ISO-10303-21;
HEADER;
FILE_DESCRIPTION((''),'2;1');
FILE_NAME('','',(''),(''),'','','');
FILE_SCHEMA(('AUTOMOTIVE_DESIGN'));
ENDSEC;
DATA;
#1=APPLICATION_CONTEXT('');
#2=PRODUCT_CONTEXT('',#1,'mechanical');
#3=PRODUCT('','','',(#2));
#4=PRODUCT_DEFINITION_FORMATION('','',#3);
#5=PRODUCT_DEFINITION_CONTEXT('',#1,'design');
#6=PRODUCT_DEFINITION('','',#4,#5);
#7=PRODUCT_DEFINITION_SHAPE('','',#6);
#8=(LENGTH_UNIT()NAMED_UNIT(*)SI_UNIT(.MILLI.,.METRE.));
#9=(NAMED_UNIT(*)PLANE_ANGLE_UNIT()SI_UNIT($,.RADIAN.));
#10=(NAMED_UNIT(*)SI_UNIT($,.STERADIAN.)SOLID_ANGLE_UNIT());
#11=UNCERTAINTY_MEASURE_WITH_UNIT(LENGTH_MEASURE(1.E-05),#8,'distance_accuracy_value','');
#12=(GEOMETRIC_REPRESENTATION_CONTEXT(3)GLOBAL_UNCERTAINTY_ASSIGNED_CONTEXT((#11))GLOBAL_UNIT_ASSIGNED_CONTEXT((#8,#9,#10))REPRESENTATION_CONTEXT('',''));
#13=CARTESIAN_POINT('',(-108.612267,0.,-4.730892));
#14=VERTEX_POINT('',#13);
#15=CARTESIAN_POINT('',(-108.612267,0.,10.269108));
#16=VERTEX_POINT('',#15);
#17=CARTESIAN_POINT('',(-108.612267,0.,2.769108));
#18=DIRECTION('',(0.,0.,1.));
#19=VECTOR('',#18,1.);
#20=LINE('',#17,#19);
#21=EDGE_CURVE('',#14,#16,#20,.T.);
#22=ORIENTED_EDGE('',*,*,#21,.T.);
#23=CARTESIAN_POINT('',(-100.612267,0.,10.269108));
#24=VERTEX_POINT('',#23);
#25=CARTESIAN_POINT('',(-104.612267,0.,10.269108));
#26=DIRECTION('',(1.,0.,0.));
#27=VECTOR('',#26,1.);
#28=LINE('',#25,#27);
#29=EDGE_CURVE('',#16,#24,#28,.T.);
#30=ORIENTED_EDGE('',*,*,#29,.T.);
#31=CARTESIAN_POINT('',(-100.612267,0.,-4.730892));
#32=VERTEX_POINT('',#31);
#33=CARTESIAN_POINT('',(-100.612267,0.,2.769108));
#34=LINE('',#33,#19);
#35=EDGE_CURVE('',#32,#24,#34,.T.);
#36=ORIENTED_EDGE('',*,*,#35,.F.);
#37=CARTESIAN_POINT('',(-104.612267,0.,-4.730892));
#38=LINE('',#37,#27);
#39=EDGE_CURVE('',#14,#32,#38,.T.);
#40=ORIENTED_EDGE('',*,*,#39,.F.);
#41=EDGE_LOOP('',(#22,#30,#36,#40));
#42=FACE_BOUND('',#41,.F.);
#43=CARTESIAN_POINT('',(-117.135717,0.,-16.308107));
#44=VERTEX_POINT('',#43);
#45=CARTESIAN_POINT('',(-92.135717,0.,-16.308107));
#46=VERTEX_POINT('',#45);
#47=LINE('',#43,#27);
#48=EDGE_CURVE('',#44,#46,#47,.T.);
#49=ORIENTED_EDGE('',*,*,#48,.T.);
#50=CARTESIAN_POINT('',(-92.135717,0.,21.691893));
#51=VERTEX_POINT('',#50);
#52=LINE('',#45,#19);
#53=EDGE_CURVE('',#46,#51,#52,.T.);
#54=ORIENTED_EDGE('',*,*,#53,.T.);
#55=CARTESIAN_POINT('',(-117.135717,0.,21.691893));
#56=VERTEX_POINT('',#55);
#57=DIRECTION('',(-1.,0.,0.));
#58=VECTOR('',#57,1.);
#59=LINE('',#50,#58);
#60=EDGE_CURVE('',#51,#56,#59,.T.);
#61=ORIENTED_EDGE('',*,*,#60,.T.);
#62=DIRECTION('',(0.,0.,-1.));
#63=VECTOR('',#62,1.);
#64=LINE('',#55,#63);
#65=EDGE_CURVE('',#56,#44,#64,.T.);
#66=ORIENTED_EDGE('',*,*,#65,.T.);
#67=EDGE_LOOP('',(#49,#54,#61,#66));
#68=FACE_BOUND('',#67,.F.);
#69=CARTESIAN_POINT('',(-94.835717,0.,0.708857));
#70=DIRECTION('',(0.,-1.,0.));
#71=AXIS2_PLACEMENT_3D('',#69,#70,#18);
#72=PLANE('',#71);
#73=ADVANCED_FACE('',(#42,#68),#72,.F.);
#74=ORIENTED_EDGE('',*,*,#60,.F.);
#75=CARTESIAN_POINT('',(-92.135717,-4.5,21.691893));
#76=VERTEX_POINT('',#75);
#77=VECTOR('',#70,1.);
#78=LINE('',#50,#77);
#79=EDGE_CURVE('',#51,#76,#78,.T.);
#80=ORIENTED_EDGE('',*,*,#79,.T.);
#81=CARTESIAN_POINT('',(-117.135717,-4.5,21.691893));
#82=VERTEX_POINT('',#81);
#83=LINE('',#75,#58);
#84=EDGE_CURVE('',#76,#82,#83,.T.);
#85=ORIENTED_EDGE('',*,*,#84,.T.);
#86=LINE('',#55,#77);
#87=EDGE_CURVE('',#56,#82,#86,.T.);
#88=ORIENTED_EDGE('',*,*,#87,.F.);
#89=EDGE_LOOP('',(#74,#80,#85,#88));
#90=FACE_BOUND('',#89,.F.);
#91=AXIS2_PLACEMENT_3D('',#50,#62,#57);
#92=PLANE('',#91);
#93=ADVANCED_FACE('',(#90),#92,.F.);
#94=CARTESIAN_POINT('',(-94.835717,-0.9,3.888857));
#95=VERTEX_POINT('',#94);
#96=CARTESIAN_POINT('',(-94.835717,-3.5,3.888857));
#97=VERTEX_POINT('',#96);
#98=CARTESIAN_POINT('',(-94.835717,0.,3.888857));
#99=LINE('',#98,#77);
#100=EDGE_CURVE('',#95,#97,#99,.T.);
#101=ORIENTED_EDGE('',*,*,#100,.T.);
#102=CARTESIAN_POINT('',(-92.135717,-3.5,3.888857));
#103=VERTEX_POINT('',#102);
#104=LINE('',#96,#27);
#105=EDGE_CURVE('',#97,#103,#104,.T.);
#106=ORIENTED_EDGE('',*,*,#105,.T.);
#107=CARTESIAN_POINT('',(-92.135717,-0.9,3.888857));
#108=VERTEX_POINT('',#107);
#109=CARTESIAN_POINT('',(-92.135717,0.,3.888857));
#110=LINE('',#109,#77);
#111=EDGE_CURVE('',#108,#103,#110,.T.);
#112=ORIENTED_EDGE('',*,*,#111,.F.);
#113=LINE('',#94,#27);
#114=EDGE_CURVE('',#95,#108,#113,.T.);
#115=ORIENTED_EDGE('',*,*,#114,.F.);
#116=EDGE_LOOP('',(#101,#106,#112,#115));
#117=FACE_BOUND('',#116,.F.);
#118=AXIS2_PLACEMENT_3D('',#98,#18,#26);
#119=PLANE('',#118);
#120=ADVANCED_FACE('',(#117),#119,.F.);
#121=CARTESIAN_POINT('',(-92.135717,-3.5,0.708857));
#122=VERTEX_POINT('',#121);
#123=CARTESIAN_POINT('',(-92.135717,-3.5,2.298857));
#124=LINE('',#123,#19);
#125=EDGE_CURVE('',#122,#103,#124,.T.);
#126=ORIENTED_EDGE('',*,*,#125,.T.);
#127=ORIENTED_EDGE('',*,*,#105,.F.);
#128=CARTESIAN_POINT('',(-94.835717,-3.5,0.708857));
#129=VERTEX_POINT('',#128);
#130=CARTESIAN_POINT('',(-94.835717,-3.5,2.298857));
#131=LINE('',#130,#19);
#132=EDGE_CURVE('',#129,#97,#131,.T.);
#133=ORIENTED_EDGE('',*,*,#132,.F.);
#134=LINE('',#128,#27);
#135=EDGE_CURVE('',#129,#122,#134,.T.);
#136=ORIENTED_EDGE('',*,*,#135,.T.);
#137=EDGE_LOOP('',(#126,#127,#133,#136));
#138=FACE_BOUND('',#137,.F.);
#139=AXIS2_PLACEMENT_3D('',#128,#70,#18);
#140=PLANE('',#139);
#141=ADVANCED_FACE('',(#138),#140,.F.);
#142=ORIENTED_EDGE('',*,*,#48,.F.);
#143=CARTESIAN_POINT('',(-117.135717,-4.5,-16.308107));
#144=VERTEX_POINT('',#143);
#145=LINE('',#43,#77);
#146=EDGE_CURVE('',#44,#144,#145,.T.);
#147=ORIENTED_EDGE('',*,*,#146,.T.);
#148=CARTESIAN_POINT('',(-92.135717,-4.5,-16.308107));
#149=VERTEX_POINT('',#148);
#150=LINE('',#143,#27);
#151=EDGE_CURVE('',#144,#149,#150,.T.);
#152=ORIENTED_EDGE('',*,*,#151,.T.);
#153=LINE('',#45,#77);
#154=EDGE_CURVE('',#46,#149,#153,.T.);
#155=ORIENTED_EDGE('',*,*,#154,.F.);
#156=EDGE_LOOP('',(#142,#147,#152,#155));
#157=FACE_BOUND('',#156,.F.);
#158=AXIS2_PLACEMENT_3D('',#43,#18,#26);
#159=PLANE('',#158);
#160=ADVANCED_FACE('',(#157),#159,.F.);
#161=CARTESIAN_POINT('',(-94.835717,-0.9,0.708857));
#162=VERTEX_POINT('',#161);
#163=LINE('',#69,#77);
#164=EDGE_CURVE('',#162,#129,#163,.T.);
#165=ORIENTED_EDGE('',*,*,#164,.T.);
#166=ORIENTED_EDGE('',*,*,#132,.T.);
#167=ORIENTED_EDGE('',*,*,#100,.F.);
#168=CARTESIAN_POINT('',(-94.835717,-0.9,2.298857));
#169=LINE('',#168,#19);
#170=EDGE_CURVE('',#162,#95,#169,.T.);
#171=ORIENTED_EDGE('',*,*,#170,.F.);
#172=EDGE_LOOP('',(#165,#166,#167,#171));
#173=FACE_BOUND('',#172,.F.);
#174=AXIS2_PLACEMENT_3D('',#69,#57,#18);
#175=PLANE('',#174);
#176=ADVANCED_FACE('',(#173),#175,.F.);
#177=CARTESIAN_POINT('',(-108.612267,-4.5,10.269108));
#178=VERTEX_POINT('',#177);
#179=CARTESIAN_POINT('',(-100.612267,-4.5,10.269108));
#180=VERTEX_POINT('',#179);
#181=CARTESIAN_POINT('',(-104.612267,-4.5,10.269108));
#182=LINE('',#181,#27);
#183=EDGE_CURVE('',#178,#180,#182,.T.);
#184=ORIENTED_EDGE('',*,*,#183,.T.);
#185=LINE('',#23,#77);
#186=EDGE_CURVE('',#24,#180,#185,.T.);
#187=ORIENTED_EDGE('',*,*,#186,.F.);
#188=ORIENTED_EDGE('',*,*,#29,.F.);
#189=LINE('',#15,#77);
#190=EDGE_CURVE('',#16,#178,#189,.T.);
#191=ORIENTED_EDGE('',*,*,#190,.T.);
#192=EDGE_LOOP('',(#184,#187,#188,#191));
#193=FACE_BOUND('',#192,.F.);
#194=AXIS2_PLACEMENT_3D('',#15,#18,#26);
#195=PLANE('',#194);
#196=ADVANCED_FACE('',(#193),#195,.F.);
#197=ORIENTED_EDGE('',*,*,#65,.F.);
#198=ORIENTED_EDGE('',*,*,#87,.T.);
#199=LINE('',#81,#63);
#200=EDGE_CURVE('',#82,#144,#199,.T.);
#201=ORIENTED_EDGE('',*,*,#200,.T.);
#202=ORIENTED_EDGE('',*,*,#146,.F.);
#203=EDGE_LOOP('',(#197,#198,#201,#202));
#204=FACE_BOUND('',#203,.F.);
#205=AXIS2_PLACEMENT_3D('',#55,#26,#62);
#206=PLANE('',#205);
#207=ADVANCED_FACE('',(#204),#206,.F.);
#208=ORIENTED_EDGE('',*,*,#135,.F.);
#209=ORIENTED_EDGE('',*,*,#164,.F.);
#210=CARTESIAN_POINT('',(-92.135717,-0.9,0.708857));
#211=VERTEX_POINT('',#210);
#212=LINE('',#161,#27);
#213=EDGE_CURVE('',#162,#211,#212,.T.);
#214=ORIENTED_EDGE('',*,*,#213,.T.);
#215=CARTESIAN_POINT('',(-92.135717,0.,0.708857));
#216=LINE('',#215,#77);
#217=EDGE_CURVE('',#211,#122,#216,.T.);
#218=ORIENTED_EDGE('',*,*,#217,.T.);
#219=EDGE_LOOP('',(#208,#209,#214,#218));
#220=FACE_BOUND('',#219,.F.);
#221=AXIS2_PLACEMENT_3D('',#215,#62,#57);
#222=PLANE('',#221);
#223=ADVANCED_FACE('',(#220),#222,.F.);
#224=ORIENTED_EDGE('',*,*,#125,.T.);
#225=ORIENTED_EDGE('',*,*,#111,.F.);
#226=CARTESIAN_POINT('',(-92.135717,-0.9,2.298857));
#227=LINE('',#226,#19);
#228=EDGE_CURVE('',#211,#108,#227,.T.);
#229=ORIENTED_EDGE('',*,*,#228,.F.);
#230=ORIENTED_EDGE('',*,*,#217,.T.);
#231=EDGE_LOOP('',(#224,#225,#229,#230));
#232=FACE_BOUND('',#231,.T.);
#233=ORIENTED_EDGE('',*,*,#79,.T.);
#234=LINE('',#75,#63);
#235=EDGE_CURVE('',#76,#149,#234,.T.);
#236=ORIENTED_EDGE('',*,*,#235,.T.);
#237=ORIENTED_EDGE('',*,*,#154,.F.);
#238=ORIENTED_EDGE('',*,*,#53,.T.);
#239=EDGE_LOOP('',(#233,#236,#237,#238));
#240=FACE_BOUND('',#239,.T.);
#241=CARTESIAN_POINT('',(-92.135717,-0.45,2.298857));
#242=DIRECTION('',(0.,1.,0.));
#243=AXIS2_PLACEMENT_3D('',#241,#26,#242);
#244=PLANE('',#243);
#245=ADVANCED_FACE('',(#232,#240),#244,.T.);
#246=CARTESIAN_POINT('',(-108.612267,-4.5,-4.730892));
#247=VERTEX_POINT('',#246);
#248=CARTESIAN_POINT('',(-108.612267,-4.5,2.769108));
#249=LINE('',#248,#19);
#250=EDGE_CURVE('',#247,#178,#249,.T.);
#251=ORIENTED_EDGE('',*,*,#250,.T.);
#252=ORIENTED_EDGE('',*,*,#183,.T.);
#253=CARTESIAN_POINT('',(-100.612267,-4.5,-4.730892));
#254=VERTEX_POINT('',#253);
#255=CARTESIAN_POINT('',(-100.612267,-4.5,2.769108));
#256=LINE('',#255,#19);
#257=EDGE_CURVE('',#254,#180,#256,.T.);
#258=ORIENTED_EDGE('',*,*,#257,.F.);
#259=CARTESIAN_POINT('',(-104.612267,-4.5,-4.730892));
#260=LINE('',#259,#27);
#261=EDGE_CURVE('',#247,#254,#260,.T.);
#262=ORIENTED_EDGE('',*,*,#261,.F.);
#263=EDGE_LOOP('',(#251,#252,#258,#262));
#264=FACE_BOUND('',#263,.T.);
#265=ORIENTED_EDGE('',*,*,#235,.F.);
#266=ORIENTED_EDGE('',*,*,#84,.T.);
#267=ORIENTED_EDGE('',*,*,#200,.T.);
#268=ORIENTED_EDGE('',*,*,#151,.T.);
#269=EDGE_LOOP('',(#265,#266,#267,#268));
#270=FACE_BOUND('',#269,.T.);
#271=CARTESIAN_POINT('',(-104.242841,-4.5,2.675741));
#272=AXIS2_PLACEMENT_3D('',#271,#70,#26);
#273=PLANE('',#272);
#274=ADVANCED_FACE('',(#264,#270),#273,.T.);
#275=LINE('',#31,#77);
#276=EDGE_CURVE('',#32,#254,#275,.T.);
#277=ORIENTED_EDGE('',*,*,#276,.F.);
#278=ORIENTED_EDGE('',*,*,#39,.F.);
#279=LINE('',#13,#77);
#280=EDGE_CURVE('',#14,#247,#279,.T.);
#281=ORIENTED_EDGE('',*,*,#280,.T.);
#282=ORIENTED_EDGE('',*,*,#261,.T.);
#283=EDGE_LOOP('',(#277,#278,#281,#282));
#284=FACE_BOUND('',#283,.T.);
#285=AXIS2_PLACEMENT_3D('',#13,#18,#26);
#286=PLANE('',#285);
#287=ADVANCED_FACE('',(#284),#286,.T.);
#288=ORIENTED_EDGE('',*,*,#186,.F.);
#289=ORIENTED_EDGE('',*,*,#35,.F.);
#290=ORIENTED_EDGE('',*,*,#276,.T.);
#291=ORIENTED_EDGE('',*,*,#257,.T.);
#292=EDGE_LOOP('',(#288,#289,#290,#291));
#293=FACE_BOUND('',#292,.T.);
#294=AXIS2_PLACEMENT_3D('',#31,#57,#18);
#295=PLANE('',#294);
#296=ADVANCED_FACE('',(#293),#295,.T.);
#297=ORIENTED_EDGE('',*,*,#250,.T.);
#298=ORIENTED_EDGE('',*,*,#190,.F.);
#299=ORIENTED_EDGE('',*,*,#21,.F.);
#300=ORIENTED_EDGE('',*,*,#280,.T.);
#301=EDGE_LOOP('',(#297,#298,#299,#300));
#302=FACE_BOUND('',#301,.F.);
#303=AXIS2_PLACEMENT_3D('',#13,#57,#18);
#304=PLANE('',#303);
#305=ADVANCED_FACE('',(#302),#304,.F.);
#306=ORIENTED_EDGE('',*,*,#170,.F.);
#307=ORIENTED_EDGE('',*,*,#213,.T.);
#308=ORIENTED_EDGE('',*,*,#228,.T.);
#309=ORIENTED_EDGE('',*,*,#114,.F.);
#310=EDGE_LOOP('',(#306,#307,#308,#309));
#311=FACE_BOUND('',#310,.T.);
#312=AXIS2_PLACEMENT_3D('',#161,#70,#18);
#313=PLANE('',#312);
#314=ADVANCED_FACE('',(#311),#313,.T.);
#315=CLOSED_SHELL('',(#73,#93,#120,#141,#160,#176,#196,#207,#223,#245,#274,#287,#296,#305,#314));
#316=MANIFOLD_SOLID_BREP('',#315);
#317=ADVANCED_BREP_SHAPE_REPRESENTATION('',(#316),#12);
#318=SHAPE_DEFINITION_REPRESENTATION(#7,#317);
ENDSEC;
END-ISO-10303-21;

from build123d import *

# Parameters (mm, degrees)
F0_W     = 8
F0_H     = 15
F1_DEPTH = 4.5
F2_W     = 0.9
F2_H     = 3.18
F2_W_2   = 1
F3_DEPTH = 2.7


# Not quite as in the source:
# - a feature names something its author has since deleted; it is built from what else it names


with BuildPart() as f1:
    # F0 (on Front) → F1 (new body)
    with BuildSketch(Plane.XZ):
        Polygon((-92.1357174787, 21.691892745), (-117.1357174787, 21.691892745), (-117.1357174787, -16.308107255), (-92.1357174787, -16.308107255), (-92.1357174787, 0.7088574011), (-94.8357174787, 0.7088574011), (-94.8357174787, 3.8888574011), (-92.1357174787, 3.8888574011), align=None)
        with Locations((-104.6122670679, 2.7691081924)):
            Rectangle(F0_W, F0_H, mode=Mode.SUBTRACT)
    extrude(amount=F1_DEPTH)

    # F2 (on face) → F3 (join)
    with BuildSketch(Plane.YZ.offset(-94.8357174787)):
        with Locations((-0.45, 2.2988574011)):
            Rectangle(F2_W, F2_H)
        with Locations((-4, 2.2988574011)):
            Rectangle(F2_W_2, F2_H)
    extrude(amount=F3_DEPTH)


solid = f1.part
